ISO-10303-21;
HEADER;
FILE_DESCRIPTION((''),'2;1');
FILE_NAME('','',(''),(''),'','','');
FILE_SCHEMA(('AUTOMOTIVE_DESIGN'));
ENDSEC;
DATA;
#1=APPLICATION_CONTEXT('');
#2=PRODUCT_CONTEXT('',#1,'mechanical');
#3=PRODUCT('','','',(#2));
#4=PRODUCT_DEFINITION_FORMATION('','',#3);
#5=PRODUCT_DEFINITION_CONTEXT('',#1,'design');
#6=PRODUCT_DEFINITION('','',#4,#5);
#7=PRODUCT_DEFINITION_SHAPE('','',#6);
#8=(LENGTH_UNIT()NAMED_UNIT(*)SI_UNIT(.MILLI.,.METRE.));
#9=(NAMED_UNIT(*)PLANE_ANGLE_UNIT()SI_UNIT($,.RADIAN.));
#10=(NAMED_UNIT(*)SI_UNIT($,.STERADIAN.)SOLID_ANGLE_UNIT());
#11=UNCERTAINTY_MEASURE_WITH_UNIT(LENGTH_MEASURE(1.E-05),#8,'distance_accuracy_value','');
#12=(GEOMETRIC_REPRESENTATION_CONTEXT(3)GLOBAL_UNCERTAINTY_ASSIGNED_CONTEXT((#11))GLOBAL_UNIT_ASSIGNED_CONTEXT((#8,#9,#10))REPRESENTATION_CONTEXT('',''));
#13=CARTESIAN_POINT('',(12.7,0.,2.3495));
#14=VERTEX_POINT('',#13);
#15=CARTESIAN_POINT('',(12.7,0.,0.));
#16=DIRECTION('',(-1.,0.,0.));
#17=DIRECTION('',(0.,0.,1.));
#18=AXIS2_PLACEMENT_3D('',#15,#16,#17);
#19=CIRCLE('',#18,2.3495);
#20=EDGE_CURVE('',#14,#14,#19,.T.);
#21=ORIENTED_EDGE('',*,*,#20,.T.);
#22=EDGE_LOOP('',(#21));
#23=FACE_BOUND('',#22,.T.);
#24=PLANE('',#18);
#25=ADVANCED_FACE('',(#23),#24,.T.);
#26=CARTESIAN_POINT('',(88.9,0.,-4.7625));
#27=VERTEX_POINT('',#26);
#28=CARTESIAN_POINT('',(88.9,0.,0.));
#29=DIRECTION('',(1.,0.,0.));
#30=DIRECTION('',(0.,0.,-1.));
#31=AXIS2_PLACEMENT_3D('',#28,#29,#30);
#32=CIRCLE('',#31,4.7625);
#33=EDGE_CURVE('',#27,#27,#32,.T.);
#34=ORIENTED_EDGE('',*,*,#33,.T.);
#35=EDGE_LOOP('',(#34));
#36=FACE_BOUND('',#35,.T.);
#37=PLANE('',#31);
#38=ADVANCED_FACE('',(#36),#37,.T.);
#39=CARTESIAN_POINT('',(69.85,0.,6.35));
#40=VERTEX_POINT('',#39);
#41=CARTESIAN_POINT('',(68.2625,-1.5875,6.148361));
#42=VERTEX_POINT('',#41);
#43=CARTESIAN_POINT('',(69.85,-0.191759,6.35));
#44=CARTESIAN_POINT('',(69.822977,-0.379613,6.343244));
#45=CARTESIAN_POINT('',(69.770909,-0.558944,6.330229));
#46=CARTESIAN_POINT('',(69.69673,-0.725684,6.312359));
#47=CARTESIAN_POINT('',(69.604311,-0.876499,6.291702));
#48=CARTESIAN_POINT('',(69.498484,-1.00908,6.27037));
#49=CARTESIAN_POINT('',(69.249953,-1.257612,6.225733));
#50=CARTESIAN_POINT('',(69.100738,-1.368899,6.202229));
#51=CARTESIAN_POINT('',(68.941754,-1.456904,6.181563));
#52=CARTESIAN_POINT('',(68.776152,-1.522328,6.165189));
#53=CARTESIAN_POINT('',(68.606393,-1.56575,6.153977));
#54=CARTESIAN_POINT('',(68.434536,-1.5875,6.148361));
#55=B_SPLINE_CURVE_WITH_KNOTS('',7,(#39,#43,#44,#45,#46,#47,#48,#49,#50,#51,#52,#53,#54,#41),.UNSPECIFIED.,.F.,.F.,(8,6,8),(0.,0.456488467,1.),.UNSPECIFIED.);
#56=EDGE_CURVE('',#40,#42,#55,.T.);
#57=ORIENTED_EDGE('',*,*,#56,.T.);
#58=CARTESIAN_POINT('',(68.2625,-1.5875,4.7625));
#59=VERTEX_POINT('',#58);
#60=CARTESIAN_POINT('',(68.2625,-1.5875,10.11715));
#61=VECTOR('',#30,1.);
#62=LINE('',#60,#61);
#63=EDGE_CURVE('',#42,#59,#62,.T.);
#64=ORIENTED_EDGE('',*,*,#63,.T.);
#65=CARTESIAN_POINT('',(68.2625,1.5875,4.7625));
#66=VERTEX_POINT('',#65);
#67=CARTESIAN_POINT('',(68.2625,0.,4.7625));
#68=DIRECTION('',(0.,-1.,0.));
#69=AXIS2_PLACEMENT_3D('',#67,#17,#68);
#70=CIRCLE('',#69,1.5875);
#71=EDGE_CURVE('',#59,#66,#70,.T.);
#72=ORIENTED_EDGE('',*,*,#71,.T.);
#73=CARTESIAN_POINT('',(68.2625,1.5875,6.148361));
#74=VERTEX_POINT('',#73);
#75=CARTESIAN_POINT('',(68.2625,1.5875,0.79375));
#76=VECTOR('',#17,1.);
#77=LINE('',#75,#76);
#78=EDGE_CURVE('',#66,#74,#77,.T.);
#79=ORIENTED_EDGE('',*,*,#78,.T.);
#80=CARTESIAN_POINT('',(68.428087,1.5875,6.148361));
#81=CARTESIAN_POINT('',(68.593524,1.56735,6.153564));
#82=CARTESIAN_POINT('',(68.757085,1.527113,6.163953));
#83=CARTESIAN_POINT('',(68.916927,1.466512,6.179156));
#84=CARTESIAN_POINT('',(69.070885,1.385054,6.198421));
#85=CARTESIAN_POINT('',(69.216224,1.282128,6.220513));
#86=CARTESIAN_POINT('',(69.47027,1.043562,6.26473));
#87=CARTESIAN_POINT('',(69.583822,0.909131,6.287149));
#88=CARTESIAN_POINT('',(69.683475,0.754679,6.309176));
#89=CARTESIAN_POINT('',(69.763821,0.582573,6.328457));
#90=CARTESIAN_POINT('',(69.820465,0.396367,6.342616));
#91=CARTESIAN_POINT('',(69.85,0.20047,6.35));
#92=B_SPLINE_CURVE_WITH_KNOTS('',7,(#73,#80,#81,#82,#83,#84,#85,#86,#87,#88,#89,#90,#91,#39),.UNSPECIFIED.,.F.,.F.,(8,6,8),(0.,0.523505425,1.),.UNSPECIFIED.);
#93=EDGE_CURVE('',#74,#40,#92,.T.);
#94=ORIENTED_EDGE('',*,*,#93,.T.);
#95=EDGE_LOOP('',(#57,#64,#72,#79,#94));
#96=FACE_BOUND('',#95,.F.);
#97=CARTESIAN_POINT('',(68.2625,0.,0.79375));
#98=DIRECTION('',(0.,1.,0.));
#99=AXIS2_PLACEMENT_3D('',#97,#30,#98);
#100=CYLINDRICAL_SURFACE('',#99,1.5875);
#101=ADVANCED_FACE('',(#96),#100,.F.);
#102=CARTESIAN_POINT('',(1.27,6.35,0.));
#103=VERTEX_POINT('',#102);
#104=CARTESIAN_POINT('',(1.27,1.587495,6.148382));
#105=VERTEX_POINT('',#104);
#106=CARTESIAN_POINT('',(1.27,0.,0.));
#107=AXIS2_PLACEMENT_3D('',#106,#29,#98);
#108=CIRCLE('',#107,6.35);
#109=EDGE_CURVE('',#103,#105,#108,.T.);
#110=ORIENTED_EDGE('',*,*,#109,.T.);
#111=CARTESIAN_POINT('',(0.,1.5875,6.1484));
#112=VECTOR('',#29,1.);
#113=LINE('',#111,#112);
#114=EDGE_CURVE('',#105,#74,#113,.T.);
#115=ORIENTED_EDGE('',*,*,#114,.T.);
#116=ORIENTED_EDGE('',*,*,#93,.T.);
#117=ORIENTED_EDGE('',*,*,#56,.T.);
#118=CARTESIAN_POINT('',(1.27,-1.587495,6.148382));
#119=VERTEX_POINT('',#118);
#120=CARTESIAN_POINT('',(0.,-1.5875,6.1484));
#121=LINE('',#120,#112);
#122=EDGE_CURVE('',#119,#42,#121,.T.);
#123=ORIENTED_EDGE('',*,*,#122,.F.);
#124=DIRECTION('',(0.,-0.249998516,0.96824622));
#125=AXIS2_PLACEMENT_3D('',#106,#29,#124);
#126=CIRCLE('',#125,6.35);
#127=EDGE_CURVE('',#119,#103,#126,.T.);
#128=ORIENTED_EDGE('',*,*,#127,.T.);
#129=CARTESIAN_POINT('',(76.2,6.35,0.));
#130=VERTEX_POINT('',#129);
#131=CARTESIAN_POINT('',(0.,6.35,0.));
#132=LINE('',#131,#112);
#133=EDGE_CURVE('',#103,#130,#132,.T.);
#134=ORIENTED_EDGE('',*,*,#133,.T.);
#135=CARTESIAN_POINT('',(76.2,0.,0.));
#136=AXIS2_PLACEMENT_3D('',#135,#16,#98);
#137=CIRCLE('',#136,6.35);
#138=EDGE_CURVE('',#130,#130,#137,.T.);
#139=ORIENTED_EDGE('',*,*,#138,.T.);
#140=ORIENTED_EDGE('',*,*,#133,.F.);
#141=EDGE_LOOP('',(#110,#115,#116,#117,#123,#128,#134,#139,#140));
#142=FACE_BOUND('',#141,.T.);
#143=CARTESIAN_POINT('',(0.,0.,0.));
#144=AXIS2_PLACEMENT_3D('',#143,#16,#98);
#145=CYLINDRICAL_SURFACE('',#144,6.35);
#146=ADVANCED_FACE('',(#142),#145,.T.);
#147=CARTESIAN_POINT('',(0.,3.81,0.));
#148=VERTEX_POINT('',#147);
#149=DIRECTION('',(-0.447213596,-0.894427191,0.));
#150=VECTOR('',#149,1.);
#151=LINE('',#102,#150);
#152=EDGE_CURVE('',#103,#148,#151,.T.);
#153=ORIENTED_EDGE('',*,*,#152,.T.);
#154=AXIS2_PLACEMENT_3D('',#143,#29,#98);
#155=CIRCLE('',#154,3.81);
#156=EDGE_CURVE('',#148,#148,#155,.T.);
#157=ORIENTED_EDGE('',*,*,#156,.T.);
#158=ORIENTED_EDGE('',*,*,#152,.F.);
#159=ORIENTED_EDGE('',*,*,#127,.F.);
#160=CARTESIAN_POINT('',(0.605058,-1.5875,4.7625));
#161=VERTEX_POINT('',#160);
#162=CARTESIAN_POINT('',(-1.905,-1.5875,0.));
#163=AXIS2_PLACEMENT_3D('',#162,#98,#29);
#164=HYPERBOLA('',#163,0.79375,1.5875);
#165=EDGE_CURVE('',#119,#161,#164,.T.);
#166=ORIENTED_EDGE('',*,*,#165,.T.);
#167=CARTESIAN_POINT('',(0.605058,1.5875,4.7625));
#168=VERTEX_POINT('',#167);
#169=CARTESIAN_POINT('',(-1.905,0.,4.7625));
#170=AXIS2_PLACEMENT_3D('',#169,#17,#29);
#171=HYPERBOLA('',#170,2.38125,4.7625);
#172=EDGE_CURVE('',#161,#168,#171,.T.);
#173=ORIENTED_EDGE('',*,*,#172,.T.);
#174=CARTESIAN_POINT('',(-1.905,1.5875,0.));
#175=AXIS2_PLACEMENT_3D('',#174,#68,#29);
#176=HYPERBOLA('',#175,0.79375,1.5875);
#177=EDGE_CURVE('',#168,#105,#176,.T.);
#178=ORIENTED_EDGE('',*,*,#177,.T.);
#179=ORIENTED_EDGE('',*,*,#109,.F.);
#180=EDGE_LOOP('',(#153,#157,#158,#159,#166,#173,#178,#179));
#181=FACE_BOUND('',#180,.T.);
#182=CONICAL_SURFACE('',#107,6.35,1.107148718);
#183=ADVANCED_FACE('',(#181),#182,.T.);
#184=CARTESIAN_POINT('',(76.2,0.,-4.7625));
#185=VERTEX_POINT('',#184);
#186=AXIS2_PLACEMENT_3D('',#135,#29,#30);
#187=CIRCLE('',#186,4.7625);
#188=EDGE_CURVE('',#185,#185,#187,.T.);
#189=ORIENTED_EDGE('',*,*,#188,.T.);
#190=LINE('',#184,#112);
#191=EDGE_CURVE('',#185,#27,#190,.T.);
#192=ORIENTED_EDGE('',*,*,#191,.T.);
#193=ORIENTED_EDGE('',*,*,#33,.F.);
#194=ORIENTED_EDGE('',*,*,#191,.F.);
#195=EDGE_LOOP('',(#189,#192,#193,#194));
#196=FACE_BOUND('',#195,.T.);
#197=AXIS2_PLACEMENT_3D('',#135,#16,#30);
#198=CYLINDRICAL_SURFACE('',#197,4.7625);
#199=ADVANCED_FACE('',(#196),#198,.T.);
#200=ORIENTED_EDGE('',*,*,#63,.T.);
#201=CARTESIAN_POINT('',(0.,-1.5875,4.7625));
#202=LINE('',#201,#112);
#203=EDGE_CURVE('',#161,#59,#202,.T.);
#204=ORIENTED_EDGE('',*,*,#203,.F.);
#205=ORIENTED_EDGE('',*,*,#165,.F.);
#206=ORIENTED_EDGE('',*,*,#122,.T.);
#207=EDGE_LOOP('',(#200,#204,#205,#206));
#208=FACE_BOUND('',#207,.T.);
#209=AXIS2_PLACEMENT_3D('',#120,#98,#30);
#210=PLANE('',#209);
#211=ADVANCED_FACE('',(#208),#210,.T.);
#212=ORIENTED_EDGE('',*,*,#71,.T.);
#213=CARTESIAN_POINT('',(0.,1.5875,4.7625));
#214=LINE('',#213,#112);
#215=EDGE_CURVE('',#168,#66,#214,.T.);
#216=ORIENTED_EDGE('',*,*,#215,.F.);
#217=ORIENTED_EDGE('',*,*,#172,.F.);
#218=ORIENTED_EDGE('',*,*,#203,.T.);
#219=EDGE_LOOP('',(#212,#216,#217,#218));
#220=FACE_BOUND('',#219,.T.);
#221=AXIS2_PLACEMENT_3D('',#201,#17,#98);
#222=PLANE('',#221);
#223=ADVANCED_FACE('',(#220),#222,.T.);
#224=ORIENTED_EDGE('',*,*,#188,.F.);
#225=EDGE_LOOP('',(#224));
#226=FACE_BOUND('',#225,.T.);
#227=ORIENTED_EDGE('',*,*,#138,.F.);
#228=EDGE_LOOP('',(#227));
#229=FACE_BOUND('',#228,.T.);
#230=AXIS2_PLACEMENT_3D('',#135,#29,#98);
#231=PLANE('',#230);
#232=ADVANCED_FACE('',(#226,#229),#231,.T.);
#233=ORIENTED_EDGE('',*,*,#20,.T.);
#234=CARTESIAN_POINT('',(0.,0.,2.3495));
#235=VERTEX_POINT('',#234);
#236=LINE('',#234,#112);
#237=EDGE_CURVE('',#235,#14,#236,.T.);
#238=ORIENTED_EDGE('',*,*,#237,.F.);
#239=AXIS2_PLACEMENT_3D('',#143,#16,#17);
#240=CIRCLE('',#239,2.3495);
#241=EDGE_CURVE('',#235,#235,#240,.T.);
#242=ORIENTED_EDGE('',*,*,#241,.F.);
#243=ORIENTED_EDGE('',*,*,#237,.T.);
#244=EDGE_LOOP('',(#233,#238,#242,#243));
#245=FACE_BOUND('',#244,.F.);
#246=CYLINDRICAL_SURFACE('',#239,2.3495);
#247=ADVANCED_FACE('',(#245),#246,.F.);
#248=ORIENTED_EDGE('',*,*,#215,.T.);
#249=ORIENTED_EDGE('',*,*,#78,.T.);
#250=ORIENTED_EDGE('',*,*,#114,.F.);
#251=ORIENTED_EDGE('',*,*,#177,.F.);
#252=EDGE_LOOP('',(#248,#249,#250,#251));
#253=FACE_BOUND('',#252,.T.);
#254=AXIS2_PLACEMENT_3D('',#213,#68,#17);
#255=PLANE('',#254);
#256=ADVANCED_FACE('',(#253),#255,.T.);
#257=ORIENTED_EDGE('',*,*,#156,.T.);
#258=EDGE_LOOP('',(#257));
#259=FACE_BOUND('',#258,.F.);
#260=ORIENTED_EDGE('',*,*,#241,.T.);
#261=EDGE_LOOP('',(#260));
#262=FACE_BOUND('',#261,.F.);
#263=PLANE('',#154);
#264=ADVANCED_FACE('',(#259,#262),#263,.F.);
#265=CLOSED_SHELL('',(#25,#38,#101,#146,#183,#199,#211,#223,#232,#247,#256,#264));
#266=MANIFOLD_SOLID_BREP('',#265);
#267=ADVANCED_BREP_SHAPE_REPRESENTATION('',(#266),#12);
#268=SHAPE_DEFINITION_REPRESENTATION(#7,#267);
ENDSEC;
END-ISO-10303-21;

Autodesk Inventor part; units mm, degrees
ref_plane "YZ Plane" through (0, 0, 0) normal (1, 0, 0) x (0, 1, 0)
ref_plane "XZ Plane" through (0, 0, 0) normal (0, 1, 0) x (-1, 0, 0)
ref_plane "XY Plane" through (0, 0, 0) normal (0, 0, 1) x (1, 0, 0)
sketch "Sketch1" plane through (0, 0, 0) normal (1, 0, 0) x (0, 1, 0)
  circle A0 centre (0, 0) radius 6.35
  line L0 (0, 0) -> (0, 6.35) construction
  line L1 (-1.5875, 6.1484) -> (-1.5875, 4.7625)
  line L2 (-1.5875, 4.7625) -> (1.5875, 4.7625)
  line L3 (1.5875, 4.7625) -> (1.5875, 6.1484)
  point P0 (0, 4.7625)
  dimension "d0" = 12.7
  dimension "d2" = 1.5875
  dimension "d3" = 3.175
extrude "Extrusion1" add sketch "Sketch1" along normal blind 76.2
sketch "Sketch2" plane through (76.2, 0, 0) normal (1, 0, 0) x (0, 0, -1)
  circle A0 centre (0, 0) radius 6.35 projected
  circle A1 centre (0, 0) radius 4.7625
  dimension "d6" = 9.525
extrude "Extrusion2" add sketch "Sketch2" along normal blind 12.7 contours A1
extrude "Extrusion3" cut sketch "Sketch1" along normal blind 69.85 contours L3 L2 L1 A0 picked at (0.1781, 5.2842)
fillet "Fillet1" radius 1.5875 2 edges at (69.85, 1.5875, 5.4554) (69.85, -1.5875, 5.4554)
chamfer "Chamfer1" distance 1.27 distance2 2.54 1 edges at (0, 0, -6.35) measured on face at (50.8, -3.3725, 5.3804)
sketch "Sketch3" plane through (0, 0, 0) normal (-1, 0, 0) x (0, 0, 1)
  circle A0 centre (0, 0) radius 3.81 projected
  circle A1 centre (0, 0) radius 2.3495
  dimension "d16" = 4.699
extrude "Extrusion4" cut sketch "Sketch3" against normal blind 12.7 contours A1
thread "Thread1" size "10-32 UNF" class "2B" standard "ANSI Unified Screw Threads" full length
properties part number "Banebots 0.5x3 P60 Shaft" material "Steel, Carbon"
